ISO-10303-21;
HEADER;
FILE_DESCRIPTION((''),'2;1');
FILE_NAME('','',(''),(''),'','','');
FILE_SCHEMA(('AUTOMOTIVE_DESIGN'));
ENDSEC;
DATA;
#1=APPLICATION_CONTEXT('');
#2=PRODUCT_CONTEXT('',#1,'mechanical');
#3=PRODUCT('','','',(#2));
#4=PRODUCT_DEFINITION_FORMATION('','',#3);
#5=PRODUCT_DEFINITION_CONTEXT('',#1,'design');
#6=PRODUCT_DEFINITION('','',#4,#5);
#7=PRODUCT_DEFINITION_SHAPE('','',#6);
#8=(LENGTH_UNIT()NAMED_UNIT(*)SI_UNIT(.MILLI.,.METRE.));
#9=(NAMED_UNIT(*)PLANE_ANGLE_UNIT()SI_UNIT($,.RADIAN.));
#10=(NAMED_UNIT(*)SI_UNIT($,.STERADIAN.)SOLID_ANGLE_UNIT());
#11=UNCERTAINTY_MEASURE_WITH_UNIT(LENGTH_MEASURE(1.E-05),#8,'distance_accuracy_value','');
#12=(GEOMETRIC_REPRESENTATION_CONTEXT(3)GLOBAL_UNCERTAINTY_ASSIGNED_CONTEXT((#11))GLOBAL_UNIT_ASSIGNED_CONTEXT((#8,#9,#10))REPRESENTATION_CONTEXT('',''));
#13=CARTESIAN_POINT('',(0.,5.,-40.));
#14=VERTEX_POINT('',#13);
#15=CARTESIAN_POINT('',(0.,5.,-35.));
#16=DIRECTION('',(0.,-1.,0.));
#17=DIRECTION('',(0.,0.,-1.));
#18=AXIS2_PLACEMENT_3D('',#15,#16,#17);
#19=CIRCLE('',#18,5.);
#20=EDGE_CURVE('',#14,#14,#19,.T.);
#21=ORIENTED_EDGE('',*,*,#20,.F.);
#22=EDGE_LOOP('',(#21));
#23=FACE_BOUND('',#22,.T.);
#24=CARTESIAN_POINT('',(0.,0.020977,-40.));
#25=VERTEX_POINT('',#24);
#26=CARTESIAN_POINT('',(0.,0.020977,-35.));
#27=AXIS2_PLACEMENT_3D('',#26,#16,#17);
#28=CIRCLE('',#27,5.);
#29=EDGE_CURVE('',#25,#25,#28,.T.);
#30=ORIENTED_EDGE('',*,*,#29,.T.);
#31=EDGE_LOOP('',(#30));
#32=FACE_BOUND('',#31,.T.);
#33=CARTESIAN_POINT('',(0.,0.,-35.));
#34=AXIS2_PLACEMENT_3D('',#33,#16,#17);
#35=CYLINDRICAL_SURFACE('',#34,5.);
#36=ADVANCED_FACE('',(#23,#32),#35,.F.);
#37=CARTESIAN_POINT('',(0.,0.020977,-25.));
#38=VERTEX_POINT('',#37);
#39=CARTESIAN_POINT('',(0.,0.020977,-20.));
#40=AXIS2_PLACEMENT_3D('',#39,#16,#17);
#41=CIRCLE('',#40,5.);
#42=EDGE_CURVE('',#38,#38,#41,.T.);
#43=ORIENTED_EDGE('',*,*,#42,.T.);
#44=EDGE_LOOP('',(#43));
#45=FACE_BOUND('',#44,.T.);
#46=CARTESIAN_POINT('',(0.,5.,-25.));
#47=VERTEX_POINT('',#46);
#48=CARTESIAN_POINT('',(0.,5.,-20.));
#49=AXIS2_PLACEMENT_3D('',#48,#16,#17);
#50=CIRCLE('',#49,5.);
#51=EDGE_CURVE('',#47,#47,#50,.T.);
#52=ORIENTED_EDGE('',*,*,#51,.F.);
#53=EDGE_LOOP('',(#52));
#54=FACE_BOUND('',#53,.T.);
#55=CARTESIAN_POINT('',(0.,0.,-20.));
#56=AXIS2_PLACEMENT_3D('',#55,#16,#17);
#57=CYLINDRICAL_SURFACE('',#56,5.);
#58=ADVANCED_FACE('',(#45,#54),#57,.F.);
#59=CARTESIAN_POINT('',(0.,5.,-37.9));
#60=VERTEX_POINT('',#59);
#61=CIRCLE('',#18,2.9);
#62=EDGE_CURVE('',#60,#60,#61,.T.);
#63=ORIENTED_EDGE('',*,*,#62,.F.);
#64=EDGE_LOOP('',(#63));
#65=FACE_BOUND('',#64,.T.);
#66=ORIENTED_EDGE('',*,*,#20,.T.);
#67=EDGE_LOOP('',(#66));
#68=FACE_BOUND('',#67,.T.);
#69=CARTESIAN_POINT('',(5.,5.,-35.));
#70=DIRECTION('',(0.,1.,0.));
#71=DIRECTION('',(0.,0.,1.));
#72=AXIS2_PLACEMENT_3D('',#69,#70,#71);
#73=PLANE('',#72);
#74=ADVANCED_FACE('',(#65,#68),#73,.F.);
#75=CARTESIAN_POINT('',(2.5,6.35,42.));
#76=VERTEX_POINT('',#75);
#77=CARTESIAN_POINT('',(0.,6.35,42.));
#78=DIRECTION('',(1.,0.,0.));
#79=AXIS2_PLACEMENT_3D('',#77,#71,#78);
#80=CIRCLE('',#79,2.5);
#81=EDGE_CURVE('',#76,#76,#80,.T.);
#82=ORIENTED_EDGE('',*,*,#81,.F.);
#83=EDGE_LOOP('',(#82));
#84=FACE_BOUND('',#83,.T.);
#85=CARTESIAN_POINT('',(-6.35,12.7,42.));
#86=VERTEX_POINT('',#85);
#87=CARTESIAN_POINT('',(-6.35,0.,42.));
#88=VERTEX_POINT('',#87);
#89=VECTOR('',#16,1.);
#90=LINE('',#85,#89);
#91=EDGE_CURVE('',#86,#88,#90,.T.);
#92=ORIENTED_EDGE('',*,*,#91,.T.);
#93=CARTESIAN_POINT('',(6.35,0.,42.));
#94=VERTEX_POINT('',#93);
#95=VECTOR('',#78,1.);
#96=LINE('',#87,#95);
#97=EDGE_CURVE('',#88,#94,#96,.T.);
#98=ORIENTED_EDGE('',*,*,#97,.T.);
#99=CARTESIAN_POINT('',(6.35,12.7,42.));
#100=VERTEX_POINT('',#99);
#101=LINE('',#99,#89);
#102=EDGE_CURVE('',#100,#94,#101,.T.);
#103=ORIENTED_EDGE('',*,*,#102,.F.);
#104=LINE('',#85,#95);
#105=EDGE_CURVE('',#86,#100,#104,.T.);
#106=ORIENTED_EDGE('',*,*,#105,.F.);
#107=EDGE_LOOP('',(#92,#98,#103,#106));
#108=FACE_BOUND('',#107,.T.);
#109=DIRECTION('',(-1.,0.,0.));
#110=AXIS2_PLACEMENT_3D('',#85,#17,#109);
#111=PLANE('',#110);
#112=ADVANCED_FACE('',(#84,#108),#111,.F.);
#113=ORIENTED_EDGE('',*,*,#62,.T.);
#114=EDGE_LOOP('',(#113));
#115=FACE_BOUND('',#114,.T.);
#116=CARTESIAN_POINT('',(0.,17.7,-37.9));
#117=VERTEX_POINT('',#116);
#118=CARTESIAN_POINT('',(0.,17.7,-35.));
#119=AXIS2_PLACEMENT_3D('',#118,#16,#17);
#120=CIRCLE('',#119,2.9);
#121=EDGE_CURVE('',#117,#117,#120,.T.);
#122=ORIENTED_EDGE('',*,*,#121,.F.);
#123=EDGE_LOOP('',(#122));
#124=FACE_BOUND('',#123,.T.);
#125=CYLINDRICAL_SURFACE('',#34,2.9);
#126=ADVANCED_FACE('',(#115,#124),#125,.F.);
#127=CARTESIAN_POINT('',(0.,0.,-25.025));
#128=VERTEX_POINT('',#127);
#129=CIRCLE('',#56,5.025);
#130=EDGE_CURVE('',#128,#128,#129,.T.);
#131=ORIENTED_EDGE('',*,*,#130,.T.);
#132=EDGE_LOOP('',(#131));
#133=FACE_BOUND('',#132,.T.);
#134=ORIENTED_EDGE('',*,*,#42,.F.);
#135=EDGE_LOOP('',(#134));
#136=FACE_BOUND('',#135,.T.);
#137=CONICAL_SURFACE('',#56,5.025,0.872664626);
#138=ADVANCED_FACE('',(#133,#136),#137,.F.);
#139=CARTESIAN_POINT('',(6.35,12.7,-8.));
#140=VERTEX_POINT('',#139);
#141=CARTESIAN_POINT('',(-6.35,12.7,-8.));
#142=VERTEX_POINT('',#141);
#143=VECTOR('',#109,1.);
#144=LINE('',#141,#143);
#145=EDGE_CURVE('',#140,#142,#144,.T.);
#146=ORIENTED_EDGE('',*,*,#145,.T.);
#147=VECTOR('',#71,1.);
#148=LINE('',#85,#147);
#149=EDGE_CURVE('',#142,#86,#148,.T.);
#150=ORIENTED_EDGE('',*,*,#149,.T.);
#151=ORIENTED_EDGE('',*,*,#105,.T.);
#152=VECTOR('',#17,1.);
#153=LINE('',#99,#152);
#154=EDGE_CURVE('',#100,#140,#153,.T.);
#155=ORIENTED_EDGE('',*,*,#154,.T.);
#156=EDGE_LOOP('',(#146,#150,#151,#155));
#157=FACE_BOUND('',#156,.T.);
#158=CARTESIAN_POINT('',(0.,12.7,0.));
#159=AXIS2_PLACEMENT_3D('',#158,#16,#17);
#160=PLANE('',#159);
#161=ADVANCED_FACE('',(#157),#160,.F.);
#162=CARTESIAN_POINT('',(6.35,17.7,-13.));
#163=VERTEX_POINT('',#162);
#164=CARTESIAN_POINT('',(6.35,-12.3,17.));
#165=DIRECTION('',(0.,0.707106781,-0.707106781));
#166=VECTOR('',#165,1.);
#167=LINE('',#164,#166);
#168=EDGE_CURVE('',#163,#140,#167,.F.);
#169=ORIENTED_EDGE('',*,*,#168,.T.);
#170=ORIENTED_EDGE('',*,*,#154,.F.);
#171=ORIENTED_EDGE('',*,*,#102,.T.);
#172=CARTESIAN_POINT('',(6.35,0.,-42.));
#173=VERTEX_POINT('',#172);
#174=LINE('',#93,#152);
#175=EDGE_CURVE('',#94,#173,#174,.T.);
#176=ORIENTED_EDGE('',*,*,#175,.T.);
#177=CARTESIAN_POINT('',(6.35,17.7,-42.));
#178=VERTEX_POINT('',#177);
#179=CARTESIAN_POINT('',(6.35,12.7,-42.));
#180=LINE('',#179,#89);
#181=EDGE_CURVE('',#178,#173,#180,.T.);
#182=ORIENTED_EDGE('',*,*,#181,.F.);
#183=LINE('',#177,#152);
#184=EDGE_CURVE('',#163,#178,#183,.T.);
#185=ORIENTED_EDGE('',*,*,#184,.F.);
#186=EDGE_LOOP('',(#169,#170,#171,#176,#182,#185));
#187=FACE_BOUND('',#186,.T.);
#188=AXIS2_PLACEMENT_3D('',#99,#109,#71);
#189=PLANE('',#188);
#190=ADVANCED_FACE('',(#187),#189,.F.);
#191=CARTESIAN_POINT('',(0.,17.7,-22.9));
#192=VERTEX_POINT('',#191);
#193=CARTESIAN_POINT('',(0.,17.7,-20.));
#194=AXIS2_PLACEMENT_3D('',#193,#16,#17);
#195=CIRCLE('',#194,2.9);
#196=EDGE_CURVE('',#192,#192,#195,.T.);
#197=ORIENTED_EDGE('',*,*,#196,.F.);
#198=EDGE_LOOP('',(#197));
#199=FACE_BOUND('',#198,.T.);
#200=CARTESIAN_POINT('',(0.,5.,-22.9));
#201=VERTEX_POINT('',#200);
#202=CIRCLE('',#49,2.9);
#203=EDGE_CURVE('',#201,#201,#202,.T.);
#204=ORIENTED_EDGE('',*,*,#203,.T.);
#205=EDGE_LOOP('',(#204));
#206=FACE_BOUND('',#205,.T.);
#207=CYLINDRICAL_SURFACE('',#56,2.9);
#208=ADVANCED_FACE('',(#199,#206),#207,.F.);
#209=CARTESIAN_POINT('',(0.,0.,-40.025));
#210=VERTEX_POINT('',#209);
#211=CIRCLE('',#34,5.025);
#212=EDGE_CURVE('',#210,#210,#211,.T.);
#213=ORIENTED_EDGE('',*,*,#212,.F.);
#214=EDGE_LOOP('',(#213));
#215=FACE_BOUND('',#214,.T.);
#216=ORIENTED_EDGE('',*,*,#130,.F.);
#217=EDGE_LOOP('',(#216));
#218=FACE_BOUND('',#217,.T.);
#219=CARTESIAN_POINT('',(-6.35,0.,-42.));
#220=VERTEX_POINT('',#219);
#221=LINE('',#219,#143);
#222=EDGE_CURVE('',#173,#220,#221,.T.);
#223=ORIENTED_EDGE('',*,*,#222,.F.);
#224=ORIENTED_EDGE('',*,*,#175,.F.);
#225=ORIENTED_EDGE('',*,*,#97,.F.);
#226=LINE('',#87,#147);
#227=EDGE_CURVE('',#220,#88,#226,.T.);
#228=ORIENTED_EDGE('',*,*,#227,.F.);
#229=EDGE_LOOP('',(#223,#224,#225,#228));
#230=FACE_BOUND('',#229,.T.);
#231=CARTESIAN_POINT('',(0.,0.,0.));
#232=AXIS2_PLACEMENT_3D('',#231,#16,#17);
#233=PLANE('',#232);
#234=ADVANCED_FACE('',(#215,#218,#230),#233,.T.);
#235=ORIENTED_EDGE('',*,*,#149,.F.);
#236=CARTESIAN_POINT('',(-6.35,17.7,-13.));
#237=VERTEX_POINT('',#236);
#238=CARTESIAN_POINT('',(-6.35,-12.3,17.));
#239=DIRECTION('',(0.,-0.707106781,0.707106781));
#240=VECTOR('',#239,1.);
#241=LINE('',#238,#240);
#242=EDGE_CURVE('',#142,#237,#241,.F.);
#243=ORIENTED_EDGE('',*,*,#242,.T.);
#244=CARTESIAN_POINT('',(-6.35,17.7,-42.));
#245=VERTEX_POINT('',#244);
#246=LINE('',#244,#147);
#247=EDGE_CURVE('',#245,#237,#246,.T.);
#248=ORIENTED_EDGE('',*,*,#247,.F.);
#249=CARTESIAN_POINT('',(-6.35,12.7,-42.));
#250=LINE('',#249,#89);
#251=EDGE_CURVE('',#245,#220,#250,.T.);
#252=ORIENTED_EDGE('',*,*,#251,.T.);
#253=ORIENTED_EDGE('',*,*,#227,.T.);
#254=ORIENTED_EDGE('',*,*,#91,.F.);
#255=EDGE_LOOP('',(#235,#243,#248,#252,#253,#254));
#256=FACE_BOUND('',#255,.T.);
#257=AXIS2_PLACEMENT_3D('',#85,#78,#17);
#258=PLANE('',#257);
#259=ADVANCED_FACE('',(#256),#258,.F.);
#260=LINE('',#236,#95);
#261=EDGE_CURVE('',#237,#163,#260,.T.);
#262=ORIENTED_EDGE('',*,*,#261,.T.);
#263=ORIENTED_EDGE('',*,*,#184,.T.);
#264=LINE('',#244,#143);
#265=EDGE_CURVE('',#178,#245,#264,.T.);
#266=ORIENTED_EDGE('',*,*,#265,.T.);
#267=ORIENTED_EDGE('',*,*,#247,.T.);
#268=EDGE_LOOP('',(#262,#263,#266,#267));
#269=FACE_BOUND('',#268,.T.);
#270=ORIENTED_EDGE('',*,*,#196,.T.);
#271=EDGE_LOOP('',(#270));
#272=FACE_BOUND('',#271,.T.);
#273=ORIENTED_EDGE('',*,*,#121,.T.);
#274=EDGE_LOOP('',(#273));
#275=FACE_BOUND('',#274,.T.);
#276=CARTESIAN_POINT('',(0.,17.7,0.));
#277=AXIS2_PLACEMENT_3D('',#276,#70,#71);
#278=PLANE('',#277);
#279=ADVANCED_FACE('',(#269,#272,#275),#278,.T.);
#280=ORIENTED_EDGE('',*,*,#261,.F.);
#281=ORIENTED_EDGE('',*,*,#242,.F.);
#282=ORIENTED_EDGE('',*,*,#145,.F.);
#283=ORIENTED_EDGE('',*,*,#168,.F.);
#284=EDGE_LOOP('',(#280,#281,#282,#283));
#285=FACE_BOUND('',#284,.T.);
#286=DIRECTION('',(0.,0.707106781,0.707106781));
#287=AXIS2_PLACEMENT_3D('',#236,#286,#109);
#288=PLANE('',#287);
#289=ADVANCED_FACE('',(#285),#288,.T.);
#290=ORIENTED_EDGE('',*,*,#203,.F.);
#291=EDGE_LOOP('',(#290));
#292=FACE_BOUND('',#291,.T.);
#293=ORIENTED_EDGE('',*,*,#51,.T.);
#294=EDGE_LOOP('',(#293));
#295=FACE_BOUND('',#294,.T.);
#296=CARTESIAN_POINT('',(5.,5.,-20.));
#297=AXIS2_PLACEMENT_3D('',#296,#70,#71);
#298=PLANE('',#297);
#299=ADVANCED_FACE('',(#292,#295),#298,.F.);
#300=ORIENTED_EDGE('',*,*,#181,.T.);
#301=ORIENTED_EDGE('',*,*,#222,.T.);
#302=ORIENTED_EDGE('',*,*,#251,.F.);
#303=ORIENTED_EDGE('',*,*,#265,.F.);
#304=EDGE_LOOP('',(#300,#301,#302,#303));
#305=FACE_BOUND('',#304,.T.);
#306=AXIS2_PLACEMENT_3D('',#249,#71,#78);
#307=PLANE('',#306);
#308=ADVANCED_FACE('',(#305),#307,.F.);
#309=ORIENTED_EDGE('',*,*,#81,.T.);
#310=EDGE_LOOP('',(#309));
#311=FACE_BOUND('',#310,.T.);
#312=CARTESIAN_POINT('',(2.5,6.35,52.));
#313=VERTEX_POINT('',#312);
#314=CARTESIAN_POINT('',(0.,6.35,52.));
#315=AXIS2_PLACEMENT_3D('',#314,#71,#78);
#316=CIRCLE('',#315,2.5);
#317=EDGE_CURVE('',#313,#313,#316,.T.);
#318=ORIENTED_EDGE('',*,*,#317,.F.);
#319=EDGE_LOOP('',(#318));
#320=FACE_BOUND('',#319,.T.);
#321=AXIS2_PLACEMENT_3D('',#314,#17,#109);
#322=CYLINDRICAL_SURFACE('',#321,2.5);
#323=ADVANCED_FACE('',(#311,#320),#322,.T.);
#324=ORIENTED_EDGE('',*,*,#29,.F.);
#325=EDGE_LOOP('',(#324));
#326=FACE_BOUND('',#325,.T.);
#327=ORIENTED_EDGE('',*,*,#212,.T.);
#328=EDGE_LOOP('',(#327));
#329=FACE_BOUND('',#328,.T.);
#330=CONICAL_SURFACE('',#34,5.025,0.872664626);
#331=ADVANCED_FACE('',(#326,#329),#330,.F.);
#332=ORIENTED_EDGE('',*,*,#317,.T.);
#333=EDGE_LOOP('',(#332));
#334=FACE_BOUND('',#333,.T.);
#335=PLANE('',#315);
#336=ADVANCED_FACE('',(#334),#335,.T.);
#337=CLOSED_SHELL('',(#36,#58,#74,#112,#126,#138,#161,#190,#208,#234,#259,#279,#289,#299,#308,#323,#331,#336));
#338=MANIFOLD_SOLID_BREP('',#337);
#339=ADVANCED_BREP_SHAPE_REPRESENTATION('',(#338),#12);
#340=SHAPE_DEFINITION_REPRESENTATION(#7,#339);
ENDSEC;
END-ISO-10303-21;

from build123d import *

# Parameters (mm, degrees)
SKETCH2_W                     = 12.7
SKETCH2_H                     = 84
BOSS_EXTRUDE1_DEPTH           = 12.7
SKETCH5_W                     = 12.7
SKETCH5_H                     = 29
BOSS_EXTRUDE2_DEPTH           = 5
CBORE_FOR_M5_SHCS1_AT_2_COUNT = 2
CBORE_FOR_M5_SHCS1_AT_2_PITCH = 15
CHAMFER1_SIZE                 = 5
SKETCH6_R                     = 2.5
BOSS_EXTRUDE3_DEPTH           = 10


with BuildPart() as part:
    # Sketch2 → Boss-Extrude1 (new body)
    with BuildSketch(Plane(origin=(0, 0, 0), x_dir=(1, 0, 0), z_dir=(0, 1, 0))):
        Rectangle(SKETCH2_W, SKETCH2_H)
    extrude(amount=BOSS_EXTRUDE1_DEPTH)

    # Sketch5 → Boss-Extrude2 (add)
    with BuildSketch(Plane(origin=(0, 12.7, 0), x_dir=(1, 0, 0), z_dir=(0, 1, 0))):
        with Locations((0, 27.5)):
            Rectangle(SKETCH5_W, SKETCH5_H)
    extrude(amount=BOSS_EXTRUDE2_DEPTH)

    # Sketch4 → CBORE for M5 SHCS1 (revolve, cut)
    with BuildSketch(Plane(origin=(0, 0, -35), x_dir=(0, 0, -1), z_dir=(1, 0, 0))):
        Polygon((0, 0), (0, 17.7), (2.9, 17.7), (2.9, 5), (5, 5), (5, 0.020977491), (5.025, 0), align=None)
    cbore_for_m5_shcs1 = revolve(axis=Axis((0, -6.35, -35), (0, 1, 0)), mode=Mode.SUBTRACT)

    # CBORE for M5 SHCS1 at 2: CBORE for M5 SHCS1 ×2
    with Locations(*[(0, 0, i * CBORE_FOR_M5_SHCS1_AT_2_PITCH) for i in range(1, CBORE_FOR_M5_SHCS1_AT_2_COUNT)]):
        add(cbore_for_m5_shcs1, mode=Mode.SUBTRACT)

    # Chamfer1
    chamfer1_edges = [part.edges().sort_by_distance(p)[0] for p in [
        (0, 12.7, -13),
    ]]
    chamfer(chamfer1_edges, length=CHAMFER1_SIZE - 0.0001)  # a hair under: the kernel refuses the full size

    # Sketch6 → Boss-Extrude3 (add)
    with BuildSketch(Plane.XY.offset(42)):
        with Locations((0, 6.35)):
            Circle(SKETCH6_R)
    extrude(amount=BOSS_EXTRUDE3_DEPTH)


solid = part.part
